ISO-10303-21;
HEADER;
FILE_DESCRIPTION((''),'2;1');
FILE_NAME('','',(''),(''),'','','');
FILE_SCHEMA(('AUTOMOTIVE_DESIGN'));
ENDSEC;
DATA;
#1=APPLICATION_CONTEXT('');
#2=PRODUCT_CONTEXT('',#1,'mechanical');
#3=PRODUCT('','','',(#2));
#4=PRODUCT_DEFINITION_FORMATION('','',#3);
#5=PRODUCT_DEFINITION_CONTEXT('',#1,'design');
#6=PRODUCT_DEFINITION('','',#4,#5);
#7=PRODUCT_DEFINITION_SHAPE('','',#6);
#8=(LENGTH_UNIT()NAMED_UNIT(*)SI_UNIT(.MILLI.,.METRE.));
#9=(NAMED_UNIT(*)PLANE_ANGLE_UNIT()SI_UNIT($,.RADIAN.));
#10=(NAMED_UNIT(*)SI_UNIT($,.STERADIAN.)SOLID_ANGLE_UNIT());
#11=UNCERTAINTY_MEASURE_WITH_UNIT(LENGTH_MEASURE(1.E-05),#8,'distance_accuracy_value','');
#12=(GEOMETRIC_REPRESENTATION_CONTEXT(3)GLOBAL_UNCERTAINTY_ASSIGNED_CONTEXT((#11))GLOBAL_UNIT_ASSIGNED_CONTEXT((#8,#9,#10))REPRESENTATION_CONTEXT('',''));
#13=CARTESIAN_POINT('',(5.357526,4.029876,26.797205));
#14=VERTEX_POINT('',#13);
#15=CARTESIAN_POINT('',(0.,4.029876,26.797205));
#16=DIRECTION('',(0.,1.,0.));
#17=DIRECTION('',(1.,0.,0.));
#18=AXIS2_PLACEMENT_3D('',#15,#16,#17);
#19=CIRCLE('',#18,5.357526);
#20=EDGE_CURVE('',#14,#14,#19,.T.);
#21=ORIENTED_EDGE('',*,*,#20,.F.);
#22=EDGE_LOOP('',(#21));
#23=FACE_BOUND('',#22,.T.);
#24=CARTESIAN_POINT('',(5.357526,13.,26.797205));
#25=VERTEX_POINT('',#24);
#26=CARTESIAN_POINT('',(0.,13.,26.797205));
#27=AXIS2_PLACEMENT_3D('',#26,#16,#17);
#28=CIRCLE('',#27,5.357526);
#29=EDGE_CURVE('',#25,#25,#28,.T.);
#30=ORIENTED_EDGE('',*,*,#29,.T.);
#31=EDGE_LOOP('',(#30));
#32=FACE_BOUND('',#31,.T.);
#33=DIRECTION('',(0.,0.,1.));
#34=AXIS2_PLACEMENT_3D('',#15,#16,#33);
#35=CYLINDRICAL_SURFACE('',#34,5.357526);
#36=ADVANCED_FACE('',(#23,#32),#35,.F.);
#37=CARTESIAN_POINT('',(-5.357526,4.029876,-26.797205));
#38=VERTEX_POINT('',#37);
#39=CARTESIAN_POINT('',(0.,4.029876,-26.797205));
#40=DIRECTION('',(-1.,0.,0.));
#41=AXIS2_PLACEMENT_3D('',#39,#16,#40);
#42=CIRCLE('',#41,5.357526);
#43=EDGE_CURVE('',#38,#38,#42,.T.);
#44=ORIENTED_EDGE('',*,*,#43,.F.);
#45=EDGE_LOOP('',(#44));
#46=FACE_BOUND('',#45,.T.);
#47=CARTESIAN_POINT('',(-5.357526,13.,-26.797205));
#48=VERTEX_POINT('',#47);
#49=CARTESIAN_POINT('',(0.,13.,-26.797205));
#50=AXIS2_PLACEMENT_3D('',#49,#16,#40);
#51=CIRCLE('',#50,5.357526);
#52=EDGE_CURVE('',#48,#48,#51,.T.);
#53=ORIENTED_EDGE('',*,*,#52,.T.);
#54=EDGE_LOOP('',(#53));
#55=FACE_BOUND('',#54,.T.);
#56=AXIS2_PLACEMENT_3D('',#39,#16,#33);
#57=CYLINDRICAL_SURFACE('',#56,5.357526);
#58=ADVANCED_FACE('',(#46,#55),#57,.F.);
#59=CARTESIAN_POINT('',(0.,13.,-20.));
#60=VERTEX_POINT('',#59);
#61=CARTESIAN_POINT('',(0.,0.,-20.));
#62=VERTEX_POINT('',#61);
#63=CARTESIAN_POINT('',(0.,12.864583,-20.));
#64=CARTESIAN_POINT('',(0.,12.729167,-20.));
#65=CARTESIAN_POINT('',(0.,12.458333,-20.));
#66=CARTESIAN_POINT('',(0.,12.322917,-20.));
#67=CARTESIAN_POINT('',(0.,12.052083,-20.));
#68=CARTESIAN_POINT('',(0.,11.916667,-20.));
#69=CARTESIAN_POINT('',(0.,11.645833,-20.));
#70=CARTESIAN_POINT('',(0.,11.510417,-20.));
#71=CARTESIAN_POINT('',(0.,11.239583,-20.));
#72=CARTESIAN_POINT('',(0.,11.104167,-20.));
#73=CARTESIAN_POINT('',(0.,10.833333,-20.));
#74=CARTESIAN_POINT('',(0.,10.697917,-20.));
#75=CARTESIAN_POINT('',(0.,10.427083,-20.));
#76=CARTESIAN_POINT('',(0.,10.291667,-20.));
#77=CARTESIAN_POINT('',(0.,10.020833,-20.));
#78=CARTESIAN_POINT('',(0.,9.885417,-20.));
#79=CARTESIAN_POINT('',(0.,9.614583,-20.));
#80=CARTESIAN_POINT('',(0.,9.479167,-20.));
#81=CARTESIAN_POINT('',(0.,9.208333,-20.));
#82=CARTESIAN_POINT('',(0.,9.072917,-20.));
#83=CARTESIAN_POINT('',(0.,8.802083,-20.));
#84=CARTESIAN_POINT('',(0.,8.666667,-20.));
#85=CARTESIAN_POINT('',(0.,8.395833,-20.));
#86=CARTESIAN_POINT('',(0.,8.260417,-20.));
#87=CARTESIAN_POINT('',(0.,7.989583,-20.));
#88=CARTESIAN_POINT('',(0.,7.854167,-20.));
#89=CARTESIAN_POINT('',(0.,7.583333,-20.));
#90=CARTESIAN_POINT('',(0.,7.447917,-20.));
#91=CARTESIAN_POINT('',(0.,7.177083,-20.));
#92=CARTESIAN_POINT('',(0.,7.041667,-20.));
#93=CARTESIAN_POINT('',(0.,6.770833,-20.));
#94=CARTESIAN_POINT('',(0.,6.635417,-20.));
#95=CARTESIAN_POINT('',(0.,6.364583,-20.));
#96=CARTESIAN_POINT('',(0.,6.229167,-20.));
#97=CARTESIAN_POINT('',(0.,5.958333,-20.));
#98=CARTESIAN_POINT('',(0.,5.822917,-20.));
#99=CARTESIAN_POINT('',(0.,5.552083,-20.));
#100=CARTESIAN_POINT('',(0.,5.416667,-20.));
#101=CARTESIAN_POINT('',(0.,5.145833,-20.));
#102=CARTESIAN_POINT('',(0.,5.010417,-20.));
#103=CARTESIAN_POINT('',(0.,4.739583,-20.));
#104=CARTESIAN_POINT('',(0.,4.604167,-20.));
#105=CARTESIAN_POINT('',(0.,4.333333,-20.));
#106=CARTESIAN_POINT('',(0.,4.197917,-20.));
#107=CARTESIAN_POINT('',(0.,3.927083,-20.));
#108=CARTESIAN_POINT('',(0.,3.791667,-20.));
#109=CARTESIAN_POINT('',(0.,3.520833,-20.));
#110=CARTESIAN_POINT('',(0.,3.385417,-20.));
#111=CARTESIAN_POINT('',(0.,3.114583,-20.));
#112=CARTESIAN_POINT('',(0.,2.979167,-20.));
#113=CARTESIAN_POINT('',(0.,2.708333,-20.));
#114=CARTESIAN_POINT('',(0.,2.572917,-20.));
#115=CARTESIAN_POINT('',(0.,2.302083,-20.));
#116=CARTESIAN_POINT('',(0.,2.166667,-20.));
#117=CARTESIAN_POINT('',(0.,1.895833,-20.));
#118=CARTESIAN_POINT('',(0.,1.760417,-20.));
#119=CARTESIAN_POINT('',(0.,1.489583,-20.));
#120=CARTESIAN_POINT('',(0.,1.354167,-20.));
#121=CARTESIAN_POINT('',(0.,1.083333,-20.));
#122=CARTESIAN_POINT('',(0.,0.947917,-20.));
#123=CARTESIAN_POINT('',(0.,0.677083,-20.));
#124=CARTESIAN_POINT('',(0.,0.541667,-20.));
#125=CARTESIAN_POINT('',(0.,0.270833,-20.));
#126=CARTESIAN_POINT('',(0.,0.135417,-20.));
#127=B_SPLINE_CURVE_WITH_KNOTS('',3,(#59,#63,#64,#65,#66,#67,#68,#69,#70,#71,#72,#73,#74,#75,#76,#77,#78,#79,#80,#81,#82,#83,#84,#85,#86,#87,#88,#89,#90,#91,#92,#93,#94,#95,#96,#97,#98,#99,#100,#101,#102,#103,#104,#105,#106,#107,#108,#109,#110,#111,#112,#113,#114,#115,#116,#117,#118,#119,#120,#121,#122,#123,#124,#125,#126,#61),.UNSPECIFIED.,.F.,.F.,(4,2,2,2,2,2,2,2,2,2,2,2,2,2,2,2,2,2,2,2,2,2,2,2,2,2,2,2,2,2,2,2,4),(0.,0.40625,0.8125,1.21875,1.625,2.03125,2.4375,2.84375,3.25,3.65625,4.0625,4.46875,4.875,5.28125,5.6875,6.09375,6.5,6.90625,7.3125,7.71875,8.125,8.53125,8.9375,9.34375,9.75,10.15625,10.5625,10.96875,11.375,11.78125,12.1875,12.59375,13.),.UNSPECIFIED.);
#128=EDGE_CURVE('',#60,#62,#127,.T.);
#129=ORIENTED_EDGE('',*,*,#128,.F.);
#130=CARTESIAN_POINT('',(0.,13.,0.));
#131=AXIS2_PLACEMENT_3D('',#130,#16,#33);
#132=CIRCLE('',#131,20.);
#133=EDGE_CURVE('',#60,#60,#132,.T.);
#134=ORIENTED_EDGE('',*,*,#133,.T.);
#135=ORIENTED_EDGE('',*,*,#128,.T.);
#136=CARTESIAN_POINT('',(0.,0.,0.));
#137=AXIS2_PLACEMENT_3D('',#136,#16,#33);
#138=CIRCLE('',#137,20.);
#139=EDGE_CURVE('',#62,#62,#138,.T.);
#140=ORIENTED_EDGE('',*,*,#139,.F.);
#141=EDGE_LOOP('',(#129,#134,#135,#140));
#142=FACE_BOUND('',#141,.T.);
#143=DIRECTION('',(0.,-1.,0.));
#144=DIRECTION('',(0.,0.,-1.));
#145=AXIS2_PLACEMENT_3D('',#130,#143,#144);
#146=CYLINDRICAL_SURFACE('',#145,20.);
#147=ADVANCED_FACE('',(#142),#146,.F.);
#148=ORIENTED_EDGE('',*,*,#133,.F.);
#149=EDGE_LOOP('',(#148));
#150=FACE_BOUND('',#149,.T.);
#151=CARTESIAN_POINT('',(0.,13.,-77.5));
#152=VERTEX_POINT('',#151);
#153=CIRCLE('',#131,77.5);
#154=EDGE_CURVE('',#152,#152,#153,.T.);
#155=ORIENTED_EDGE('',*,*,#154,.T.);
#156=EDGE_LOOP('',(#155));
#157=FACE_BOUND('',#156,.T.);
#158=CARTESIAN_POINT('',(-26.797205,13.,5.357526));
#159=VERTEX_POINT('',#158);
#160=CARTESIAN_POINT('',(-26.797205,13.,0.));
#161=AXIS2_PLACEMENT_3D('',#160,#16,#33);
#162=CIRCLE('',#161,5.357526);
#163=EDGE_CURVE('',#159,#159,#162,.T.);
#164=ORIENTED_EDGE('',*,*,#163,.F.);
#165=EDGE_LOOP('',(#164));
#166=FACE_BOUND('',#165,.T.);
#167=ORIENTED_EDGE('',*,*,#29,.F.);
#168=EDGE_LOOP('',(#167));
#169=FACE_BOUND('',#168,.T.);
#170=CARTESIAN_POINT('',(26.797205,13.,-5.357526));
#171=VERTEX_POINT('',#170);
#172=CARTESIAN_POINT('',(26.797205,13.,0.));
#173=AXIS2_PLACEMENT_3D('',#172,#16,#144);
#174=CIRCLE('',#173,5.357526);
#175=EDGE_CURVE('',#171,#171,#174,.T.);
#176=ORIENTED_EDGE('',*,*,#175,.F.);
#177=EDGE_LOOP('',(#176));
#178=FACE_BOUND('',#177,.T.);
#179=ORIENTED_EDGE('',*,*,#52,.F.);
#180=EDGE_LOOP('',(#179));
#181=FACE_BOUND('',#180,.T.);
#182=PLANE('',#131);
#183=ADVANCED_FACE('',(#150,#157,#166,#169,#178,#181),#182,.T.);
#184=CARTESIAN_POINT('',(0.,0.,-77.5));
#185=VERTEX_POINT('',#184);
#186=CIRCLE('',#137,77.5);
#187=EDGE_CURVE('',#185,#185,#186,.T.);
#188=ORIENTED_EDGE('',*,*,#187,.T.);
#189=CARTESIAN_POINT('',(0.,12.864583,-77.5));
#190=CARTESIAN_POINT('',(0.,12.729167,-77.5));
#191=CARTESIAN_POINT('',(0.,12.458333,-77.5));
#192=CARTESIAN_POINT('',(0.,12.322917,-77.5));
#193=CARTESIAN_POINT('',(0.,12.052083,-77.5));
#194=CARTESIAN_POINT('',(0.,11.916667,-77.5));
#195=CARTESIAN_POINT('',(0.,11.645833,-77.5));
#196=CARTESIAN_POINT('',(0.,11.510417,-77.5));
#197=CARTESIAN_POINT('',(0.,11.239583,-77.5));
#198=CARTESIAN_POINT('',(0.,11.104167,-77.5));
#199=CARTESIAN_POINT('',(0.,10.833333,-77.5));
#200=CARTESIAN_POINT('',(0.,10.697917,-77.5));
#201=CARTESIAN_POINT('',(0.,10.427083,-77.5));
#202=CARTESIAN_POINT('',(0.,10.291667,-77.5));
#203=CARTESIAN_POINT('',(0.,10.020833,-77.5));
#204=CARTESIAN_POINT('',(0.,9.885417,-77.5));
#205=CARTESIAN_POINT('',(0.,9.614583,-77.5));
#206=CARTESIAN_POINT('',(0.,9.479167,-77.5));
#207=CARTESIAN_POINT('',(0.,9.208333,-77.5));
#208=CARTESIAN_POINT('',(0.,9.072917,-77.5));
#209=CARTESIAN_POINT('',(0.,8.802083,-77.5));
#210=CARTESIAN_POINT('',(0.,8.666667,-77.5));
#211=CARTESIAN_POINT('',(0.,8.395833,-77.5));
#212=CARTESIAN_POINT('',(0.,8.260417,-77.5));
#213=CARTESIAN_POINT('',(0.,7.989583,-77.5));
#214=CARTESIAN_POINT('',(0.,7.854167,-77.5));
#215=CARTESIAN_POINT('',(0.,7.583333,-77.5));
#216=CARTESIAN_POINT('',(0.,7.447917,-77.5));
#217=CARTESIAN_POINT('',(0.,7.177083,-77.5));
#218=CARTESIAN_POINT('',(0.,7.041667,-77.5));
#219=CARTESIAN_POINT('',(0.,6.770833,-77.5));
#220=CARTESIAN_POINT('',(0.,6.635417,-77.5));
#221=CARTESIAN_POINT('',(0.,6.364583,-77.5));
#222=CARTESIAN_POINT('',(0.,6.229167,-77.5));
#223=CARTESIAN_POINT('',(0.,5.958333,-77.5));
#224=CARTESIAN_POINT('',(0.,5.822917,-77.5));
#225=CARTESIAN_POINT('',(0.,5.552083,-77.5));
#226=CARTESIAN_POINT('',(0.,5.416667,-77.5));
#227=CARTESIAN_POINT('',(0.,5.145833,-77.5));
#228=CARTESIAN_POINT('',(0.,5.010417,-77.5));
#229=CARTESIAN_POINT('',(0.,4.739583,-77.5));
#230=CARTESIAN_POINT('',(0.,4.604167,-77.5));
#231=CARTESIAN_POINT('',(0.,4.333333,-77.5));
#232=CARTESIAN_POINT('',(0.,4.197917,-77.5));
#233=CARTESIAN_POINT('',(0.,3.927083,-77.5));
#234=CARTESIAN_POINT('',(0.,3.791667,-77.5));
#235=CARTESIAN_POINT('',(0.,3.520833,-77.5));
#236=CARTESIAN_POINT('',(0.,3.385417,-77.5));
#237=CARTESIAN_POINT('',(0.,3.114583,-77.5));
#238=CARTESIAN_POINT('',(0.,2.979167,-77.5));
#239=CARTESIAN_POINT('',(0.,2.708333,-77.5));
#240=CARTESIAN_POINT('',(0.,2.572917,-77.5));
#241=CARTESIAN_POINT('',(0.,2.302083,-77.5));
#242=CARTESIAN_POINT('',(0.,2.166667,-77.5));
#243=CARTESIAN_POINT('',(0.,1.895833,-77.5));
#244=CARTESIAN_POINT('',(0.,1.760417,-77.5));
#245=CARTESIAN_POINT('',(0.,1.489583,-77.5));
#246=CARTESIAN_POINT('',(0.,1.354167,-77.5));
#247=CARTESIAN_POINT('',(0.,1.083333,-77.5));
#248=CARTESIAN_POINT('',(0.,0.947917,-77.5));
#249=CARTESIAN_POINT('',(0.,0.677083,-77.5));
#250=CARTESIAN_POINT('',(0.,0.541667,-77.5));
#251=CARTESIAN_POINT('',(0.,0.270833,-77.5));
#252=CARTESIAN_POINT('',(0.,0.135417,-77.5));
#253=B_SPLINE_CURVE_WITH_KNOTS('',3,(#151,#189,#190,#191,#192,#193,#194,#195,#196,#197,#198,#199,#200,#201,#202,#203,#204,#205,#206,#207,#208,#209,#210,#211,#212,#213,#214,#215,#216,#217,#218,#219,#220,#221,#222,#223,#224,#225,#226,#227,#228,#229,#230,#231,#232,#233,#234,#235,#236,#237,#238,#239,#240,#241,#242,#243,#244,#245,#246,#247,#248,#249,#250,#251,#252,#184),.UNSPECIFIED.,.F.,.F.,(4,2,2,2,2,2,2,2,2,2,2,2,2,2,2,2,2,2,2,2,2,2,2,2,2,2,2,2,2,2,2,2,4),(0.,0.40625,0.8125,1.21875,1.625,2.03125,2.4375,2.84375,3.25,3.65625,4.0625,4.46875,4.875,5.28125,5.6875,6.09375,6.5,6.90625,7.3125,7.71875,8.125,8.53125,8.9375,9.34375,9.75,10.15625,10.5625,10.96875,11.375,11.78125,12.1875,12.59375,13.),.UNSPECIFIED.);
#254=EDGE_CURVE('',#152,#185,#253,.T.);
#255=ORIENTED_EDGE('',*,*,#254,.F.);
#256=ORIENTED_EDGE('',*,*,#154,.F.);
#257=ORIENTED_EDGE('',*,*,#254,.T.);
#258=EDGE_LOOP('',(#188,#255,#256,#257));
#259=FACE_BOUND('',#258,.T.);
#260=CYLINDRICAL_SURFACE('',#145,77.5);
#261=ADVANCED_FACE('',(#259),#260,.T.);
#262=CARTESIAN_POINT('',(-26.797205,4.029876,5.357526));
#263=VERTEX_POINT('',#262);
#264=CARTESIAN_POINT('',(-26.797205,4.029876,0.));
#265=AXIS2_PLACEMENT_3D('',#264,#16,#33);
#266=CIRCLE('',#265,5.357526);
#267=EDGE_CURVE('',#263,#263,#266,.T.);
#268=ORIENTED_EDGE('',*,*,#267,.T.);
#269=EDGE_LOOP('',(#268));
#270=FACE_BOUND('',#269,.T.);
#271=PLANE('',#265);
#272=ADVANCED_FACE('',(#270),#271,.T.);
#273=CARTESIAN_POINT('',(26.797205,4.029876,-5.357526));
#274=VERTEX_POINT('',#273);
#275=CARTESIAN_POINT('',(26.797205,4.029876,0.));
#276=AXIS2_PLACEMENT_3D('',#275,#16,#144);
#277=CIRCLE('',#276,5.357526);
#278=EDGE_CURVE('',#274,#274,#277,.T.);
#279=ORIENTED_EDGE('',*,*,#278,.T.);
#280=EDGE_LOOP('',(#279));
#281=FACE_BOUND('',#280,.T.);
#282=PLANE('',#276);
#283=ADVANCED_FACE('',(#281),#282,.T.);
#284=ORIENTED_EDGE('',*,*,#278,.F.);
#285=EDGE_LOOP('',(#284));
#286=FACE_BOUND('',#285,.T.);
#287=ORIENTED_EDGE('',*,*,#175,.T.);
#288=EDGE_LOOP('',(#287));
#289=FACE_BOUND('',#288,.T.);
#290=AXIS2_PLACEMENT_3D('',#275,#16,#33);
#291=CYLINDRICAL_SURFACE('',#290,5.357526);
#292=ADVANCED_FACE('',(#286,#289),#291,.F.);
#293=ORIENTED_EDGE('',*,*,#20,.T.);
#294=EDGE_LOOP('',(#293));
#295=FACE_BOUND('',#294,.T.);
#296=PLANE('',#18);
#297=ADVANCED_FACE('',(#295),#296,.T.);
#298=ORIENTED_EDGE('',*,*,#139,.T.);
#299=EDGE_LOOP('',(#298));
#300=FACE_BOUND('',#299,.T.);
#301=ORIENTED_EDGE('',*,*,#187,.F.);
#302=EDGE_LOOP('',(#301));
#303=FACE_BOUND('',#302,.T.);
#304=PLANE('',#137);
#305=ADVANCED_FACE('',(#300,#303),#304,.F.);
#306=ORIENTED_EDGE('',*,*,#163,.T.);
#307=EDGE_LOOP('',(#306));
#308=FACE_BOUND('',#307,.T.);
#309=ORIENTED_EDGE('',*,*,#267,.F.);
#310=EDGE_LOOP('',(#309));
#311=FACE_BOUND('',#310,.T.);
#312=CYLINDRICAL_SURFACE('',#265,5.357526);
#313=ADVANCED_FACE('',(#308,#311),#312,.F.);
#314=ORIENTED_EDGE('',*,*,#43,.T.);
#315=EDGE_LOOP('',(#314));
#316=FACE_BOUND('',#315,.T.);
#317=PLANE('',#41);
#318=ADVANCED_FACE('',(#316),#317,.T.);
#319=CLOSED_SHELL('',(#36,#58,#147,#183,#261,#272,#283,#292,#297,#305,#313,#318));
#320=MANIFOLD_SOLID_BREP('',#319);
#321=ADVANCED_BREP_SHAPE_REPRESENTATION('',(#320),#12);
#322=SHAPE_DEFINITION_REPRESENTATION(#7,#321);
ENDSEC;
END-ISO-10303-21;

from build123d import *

# Parameters (mm, degrees)
SKETCH1_R           = 77.5
BOSS_EXTRUDE1_DEPTH = 13
SKETCH2_R           = 20
CUT_EXTRUDE1_DEPTH  = 111.369832835
SKETCH3_R           = 5.357526039
CUT_EXTRUDE2_DEPTH  = 8.970124098
CIRPATTERN1_COUNT   = 4


with BuildPart() as part:
    # Sketch1 → Boss-Extrude1 (new body)
    with BuildSketch(Plane(origin=(0, 0, 0), x_dir=(1, 0, 0), z_dir=(0, 1, 0))):
        Circle(SKETCH1_R)
    extrude(amount=BOSS_EXTRUDE1_DEPTH)

    # Sketch2 → Cut-Extrude1 (cut, through all)
    with BuildSketch(Plane(origin=(0, 0, 0), x_dir=(1, 0, 0), z_dir=(0, 1, 0))):
        Circle(SKETCH2_R)
    extrude(amount=CUT_EXTRUDE1_DEPTH, mode=Mode.SUBTRACT)

    # Sketch3 → Cut-Extrude2 (cut)
    with BuildSketch(Plane(origin=(0, 13, 0), x_dir=(1, 0, 0), z_dir=(0, 1, 0))):
        with Locations((-26.797204865, 0)):
            Circle(SKETCH3_R)
    cut_extrude2 = extrude(amount=-CUT_EXTRUDE2_DEPTH, mode=Mode.SUBTRACT)

    # CirPattern1: Cut-Extrude2 ×4 about axis
    cirpattern1_axis = Axis((0, 0, 0), (0, 1, 0))
    for i in range(1, CIRPATTERN1_COUNT):
        add(cut_extrude2.rotate(cirpattern1_axis, i * 360 / CIRPATTERN1_COUNT), mode=Mode.SUBTRACT)


solid = part.part
